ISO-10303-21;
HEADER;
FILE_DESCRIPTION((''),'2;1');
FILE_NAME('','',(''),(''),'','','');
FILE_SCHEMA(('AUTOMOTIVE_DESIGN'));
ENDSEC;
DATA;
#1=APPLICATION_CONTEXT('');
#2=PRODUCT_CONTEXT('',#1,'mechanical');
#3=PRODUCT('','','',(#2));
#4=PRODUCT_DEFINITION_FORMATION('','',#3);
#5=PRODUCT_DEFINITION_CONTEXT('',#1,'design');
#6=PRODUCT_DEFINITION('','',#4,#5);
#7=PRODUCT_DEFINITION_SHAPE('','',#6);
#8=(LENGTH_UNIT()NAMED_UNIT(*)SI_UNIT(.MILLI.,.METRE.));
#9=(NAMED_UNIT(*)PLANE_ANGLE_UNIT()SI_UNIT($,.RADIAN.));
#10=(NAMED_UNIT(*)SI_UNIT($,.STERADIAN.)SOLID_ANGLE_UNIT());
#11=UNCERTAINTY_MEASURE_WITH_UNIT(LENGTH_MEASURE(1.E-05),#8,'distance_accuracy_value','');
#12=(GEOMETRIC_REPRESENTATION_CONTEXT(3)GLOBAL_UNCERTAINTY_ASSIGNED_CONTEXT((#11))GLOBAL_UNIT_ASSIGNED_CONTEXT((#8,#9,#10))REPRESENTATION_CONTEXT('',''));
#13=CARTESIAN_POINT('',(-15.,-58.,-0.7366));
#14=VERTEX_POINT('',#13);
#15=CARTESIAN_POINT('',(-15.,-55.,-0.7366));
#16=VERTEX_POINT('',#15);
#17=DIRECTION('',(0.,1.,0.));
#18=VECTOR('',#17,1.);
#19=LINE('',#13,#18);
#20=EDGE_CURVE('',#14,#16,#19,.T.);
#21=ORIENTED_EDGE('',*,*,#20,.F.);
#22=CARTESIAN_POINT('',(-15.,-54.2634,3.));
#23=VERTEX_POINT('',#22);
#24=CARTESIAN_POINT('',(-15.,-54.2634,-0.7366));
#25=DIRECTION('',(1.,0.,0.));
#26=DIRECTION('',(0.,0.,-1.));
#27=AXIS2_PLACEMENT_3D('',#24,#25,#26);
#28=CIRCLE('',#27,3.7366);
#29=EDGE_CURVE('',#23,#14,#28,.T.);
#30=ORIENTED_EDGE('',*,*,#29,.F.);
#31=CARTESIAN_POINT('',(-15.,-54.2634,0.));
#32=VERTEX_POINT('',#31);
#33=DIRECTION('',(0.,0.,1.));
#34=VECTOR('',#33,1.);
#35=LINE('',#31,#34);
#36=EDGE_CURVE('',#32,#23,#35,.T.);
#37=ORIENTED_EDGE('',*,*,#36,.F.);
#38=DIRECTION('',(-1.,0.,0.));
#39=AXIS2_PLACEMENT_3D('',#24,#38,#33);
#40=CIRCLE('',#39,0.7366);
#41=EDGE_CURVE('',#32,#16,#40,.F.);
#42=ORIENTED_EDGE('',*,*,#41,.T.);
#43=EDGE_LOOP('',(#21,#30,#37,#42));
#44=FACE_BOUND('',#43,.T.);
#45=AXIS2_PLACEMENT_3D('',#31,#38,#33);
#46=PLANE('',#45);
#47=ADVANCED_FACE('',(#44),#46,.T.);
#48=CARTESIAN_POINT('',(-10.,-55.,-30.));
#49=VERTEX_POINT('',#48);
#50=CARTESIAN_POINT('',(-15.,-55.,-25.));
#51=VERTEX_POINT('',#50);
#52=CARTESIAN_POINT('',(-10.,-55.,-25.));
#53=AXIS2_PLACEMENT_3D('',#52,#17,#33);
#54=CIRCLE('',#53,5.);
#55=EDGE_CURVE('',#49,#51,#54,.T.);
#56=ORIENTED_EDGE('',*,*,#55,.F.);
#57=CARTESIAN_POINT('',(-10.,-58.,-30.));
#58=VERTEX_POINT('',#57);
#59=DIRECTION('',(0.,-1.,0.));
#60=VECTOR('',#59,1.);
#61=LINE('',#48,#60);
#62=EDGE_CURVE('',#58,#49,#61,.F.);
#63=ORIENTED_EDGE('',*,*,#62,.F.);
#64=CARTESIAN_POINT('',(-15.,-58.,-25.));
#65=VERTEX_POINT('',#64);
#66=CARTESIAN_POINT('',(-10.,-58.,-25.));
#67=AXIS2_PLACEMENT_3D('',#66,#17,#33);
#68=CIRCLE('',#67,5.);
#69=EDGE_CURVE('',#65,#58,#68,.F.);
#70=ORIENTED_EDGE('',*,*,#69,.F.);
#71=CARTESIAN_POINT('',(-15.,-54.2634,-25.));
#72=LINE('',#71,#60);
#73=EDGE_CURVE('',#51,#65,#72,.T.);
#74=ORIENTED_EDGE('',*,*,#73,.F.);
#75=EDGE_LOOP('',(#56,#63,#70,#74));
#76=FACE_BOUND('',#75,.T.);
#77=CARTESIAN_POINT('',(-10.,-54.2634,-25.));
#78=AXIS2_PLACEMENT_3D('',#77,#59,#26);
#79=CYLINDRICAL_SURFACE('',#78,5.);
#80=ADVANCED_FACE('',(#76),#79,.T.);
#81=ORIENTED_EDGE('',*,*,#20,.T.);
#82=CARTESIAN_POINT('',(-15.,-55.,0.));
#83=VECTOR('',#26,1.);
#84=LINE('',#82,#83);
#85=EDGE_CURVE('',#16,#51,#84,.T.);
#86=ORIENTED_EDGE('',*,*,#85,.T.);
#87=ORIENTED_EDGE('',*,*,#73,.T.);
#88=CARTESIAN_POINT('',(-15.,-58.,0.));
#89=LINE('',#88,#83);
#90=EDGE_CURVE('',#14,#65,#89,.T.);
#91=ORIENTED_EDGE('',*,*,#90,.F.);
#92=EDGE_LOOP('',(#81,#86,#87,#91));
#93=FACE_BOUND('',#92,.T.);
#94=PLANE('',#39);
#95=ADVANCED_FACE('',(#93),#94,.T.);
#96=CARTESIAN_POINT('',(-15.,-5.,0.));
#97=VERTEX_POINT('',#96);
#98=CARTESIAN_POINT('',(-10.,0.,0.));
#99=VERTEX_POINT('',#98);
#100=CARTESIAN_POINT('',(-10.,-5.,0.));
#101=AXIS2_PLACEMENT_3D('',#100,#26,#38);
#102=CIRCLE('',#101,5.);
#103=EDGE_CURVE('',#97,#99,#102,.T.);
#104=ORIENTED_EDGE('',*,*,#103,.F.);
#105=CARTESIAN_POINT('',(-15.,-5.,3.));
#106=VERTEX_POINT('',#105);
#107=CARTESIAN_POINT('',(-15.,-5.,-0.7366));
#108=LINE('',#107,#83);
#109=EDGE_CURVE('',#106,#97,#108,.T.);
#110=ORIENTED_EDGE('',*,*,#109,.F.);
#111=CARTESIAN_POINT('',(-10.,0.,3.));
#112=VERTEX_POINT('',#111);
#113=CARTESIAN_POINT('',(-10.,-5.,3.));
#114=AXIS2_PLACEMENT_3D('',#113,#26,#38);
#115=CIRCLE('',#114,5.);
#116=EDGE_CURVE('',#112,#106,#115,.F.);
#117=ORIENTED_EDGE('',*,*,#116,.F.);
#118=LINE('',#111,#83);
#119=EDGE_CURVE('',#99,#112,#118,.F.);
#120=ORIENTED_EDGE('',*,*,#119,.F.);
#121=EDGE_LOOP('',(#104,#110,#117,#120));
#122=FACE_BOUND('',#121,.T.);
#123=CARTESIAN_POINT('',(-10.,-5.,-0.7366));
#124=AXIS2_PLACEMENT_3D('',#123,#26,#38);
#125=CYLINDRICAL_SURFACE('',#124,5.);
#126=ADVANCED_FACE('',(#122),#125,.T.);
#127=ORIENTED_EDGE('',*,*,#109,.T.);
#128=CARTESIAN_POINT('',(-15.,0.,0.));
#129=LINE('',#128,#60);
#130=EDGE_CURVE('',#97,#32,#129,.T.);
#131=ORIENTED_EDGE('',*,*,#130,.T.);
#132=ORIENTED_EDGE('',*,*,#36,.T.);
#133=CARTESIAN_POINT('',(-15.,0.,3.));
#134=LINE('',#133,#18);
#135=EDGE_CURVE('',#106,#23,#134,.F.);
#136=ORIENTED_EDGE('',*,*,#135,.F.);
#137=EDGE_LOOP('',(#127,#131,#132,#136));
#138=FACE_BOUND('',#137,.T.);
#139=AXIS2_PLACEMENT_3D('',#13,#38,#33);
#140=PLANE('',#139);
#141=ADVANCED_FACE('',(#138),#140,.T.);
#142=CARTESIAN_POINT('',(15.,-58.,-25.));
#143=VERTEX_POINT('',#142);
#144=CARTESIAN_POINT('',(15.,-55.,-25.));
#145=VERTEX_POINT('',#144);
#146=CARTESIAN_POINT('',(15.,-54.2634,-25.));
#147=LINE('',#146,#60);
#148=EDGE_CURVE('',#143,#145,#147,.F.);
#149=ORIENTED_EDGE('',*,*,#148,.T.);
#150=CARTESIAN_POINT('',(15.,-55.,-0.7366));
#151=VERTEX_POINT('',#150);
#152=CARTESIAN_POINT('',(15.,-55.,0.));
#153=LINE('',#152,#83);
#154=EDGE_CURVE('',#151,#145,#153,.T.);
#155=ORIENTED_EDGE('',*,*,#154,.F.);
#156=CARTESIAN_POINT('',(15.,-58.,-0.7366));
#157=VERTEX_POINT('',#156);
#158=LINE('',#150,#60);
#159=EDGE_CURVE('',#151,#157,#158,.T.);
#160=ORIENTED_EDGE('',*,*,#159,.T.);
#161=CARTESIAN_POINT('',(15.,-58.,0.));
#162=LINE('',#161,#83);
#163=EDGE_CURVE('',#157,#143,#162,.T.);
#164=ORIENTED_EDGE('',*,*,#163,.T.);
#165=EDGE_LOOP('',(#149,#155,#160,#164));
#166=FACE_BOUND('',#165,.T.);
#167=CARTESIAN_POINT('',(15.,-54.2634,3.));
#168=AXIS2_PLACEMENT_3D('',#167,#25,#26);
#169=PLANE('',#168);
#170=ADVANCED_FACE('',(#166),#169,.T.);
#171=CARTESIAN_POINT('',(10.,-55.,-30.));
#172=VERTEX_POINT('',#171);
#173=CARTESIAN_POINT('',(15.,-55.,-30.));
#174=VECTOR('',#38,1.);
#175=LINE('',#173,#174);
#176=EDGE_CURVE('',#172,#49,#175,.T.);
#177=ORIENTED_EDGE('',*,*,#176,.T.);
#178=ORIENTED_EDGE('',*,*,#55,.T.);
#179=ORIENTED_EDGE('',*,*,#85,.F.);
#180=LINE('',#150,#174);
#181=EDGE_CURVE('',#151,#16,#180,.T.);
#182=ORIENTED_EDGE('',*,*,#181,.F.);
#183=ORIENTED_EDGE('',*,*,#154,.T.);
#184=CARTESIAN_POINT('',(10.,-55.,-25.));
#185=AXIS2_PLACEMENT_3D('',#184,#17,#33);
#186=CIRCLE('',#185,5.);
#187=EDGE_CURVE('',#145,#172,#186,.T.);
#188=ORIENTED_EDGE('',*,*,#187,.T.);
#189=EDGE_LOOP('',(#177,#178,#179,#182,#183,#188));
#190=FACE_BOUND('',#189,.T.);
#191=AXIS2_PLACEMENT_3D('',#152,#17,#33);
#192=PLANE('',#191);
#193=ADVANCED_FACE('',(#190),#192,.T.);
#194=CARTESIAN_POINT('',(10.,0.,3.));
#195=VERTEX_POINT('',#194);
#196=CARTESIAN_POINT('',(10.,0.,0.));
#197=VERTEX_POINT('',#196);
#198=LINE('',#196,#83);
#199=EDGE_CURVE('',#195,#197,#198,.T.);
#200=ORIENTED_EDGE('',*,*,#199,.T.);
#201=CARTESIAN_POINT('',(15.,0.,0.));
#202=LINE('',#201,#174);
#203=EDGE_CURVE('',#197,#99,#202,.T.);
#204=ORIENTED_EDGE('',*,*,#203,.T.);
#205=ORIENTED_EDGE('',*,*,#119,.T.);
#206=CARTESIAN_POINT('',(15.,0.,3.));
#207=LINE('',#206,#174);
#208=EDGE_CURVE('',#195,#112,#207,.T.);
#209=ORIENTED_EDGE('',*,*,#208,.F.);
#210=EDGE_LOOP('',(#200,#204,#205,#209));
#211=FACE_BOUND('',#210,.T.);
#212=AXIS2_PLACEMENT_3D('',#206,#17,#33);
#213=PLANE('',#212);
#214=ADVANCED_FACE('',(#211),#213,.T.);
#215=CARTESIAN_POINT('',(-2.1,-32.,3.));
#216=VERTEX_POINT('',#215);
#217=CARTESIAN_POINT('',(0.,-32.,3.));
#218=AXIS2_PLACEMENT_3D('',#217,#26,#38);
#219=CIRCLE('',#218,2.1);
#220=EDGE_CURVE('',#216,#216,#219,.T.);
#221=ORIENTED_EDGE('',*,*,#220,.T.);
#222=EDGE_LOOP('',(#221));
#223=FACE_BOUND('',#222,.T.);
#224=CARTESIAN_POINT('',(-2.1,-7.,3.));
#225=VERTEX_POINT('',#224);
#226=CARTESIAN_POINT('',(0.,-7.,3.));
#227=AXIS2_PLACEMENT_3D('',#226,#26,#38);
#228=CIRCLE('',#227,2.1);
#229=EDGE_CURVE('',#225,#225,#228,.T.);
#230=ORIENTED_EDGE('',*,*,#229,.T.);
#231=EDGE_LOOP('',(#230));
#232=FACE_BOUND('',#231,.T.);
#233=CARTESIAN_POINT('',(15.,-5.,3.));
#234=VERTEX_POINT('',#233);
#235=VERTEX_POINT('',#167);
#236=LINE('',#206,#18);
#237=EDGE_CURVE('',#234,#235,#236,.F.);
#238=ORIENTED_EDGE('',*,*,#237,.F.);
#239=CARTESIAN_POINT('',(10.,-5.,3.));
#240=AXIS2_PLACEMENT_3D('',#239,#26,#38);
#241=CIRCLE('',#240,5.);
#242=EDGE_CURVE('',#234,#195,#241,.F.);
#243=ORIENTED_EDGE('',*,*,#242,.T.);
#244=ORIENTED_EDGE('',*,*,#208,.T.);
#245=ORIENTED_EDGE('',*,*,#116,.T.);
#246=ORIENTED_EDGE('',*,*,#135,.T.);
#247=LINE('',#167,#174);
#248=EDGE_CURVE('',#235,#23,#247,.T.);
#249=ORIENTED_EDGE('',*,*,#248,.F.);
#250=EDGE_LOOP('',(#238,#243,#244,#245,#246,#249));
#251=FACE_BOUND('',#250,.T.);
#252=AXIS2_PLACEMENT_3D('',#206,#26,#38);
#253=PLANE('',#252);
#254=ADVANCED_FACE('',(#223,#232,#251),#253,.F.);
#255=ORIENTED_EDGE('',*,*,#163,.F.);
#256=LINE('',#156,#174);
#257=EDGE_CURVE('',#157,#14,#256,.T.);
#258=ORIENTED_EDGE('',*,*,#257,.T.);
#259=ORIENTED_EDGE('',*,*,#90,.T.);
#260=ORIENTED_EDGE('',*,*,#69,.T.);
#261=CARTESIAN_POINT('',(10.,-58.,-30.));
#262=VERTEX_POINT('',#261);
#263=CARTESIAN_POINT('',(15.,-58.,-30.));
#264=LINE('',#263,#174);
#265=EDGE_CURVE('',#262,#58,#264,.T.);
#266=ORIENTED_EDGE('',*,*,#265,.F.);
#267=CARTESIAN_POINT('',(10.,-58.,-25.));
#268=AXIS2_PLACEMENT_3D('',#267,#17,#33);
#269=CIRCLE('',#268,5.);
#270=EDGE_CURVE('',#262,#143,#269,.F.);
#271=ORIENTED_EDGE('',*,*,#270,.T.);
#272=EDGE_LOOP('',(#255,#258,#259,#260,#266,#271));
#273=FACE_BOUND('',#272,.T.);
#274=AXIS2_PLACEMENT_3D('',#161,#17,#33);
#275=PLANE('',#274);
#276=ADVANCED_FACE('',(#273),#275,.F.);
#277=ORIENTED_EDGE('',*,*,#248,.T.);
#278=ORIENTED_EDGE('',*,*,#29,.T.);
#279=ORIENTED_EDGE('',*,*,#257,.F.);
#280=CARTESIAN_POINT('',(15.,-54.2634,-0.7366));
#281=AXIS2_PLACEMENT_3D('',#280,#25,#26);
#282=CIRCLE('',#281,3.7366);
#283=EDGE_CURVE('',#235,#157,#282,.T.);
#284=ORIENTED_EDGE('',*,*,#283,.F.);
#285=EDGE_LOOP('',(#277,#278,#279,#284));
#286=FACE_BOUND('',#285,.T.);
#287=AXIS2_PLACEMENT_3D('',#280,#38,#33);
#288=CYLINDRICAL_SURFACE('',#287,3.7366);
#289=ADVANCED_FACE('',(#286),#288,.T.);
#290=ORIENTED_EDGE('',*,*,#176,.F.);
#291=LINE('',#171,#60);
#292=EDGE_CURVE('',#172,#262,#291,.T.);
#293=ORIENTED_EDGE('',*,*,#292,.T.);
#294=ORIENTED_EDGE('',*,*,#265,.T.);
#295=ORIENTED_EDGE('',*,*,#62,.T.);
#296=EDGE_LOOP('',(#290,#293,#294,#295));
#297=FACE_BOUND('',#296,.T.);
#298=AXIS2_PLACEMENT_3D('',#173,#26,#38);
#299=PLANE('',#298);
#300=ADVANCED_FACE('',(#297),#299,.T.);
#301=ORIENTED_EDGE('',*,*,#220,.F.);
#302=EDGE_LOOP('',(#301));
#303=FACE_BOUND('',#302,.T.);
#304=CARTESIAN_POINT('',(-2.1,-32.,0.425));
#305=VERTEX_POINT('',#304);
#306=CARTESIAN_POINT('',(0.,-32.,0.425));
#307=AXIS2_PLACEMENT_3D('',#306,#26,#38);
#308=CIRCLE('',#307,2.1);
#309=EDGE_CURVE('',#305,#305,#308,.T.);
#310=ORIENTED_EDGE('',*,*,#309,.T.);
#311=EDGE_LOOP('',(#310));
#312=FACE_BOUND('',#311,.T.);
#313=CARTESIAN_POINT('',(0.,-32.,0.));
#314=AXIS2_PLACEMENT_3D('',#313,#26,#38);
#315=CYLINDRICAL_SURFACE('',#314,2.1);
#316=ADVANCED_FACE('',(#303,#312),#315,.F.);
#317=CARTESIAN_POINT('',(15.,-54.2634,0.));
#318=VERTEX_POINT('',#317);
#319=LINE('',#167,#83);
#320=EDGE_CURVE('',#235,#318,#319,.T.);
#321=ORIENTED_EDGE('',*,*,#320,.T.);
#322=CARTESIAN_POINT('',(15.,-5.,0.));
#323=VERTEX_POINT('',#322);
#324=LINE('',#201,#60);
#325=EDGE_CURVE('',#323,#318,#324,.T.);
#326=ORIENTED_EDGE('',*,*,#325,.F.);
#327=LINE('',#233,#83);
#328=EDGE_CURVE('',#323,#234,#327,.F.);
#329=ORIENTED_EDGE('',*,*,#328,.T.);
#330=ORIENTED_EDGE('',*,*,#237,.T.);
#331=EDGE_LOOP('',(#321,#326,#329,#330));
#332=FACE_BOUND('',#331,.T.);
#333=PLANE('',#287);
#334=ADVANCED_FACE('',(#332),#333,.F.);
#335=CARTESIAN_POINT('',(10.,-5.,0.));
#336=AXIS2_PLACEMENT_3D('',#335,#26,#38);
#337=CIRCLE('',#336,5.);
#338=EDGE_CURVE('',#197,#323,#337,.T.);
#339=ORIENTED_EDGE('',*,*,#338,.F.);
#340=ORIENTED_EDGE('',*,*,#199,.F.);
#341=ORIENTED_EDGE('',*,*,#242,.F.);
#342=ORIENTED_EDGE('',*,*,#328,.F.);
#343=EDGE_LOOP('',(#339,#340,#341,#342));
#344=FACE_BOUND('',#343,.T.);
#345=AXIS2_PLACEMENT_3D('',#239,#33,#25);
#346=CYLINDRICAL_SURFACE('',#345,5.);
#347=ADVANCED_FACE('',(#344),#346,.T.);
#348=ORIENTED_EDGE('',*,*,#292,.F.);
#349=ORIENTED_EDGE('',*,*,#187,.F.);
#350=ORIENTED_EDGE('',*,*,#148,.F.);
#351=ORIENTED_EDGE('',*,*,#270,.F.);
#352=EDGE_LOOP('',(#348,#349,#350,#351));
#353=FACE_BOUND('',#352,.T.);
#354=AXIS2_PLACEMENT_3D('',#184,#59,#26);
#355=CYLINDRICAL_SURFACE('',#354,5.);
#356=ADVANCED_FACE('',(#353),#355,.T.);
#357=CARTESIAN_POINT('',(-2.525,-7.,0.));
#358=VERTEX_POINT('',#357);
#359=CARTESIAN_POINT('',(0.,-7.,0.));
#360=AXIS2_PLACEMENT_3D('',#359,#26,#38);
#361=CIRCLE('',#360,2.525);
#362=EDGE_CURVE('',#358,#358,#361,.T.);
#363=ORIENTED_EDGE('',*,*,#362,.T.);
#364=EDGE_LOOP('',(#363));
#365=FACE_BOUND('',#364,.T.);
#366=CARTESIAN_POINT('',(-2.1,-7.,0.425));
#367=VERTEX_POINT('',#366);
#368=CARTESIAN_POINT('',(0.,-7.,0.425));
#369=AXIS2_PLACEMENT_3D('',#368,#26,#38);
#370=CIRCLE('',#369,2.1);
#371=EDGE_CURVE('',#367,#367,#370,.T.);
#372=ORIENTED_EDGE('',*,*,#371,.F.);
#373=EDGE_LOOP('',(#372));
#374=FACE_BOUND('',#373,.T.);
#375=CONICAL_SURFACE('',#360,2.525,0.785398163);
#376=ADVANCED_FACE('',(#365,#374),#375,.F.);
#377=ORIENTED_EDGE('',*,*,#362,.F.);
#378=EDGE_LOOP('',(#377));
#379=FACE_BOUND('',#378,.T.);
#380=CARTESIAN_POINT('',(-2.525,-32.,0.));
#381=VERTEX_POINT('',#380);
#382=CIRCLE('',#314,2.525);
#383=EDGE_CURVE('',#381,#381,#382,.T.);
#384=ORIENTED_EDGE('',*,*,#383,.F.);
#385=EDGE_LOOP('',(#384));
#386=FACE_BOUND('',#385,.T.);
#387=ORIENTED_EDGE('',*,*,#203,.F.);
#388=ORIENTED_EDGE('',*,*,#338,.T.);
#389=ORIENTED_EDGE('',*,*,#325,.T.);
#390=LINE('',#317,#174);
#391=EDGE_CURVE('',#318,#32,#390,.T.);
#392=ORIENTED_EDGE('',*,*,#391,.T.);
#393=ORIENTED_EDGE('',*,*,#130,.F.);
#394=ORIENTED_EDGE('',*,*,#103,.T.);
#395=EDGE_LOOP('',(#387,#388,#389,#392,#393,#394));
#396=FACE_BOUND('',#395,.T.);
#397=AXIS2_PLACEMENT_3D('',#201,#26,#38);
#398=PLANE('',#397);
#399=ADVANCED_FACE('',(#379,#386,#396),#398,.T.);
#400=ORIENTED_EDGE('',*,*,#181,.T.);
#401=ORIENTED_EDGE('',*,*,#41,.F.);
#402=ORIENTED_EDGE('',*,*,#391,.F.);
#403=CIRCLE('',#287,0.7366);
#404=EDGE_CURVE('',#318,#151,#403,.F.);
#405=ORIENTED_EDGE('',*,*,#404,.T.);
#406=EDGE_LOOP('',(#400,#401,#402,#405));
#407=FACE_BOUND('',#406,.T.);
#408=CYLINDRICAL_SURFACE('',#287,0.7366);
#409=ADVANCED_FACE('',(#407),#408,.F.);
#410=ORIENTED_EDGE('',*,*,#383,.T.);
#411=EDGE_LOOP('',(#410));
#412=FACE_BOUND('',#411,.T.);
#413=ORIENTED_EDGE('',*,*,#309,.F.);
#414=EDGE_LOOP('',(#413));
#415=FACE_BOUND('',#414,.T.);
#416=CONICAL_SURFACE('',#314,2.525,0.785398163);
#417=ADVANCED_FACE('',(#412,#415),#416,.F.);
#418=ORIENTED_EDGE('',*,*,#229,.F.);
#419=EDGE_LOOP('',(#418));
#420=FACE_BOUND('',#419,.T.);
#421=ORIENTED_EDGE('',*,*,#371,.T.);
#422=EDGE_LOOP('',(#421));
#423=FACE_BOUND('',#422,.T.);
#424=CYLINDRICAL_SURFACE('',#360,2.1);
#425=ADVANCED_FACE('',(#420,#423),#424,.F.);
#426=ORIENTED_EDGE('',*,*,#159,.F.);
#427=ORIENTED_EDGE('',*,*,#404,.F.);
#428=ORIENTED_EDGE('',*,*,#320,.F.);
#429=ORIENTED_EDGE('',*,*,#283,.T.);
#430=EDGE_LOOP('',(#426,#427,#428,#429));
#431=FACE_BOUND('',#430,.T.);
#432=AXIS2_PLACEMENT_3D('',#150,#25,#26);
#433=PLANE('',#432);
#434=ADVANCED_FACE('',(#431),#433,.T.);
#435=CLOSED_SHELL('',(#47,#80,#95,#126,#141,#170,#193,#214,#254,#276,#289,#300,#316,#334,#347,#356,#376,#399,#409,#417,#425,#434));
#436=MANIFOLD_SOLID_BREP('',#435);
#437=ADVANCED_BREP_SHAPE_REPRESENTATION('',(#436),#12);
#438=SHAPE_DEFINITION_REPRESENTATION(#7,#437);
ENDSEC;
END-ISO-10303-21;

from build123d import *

# Parameters (mm, degrees)
BASE_FLANGE1_DEPTH          = 15
M5_TAPPED_HOLE1_D           = 4.2
M5_TAPPED_HOLE1_DEPTH       = 14
M5_TAPPED_HOLE1_CSINK_D     = 5.05
M5_TAPPED_HOLE1_CSINK_ANGLE = 90
M5_TAPPED_HOLE1_TIP         = 1.2618073
FILLET1_R                   = 5


# Sheet-metal steps are written as plain solids
with BuildPart() as part:
    # Sketch1 → Base-Flange1 (new, symmetric)
    with BuildSketch(Plane(origin=(0, 0, 0), x_dir=(0, 0, -1), z_dir=(1, 0, 0))):
        with BuildLine():
            Line((0, 0), (0, -54.2634))
            ThreePointArc((0, -54.2634), (0.215745145, -54.784254855), (0.7366, -55))
            Line((0.7366, -55), (30, -55))
            Line((30, -55), (30, -58))
            Line((30, -58), (0.7366, -58))
            ThreePointArc((0.7366, -58), (-1.905575199, -56.905575199), (-3, -54.2634))
            Line((-3, -54.2634), (-3, 0))
            Line((-3, 0), (0, 0))
        make_face()
    extrude(amount=BASE_FLANGE1_DEPTH, both=True)

    # M5 Tapped Hole1
    with Locations(Plane(origin=(0, 0, 0), x_dir=(-1, 0, 0), z_dir=(0, 0, -1))):
        with Locations((0, -32), (0, -7)):
            CounterSinkHole(M5_TAPPED_HOLE1_D / 2, M5_TAPPED_HOLE1_CSINK_D / 2, depth=M5_TAPPED_HOLE1_DEPTH, counter_sink_angle=M5_TAPPED_HOLE1_CSINK_ANGLE)
            with Locations((0, 0, -(M5_TAPPED_HOLE1_DEPTH + M5_TAPPED_HOLE1_TIP / 2))):  # 118° drill point
                Cone(0, M5_TAPPED_HOLE1_D / 2, M5_TAPPED_HOLE1_TIP, mode=Mode.SUBTRACT)

    # Fillet1
    fillet1_edges = [part.edges().sort_by_distance(p)[0] for p in [
        (15, 0, 1.5),
        (-15, 0, 1.5),
        (15, -56.5, -30),
        (-15, -56.5, -30),
    ]]
    fillet(fillet1_edges, radius=FILLET1_R)


solid = part.part
